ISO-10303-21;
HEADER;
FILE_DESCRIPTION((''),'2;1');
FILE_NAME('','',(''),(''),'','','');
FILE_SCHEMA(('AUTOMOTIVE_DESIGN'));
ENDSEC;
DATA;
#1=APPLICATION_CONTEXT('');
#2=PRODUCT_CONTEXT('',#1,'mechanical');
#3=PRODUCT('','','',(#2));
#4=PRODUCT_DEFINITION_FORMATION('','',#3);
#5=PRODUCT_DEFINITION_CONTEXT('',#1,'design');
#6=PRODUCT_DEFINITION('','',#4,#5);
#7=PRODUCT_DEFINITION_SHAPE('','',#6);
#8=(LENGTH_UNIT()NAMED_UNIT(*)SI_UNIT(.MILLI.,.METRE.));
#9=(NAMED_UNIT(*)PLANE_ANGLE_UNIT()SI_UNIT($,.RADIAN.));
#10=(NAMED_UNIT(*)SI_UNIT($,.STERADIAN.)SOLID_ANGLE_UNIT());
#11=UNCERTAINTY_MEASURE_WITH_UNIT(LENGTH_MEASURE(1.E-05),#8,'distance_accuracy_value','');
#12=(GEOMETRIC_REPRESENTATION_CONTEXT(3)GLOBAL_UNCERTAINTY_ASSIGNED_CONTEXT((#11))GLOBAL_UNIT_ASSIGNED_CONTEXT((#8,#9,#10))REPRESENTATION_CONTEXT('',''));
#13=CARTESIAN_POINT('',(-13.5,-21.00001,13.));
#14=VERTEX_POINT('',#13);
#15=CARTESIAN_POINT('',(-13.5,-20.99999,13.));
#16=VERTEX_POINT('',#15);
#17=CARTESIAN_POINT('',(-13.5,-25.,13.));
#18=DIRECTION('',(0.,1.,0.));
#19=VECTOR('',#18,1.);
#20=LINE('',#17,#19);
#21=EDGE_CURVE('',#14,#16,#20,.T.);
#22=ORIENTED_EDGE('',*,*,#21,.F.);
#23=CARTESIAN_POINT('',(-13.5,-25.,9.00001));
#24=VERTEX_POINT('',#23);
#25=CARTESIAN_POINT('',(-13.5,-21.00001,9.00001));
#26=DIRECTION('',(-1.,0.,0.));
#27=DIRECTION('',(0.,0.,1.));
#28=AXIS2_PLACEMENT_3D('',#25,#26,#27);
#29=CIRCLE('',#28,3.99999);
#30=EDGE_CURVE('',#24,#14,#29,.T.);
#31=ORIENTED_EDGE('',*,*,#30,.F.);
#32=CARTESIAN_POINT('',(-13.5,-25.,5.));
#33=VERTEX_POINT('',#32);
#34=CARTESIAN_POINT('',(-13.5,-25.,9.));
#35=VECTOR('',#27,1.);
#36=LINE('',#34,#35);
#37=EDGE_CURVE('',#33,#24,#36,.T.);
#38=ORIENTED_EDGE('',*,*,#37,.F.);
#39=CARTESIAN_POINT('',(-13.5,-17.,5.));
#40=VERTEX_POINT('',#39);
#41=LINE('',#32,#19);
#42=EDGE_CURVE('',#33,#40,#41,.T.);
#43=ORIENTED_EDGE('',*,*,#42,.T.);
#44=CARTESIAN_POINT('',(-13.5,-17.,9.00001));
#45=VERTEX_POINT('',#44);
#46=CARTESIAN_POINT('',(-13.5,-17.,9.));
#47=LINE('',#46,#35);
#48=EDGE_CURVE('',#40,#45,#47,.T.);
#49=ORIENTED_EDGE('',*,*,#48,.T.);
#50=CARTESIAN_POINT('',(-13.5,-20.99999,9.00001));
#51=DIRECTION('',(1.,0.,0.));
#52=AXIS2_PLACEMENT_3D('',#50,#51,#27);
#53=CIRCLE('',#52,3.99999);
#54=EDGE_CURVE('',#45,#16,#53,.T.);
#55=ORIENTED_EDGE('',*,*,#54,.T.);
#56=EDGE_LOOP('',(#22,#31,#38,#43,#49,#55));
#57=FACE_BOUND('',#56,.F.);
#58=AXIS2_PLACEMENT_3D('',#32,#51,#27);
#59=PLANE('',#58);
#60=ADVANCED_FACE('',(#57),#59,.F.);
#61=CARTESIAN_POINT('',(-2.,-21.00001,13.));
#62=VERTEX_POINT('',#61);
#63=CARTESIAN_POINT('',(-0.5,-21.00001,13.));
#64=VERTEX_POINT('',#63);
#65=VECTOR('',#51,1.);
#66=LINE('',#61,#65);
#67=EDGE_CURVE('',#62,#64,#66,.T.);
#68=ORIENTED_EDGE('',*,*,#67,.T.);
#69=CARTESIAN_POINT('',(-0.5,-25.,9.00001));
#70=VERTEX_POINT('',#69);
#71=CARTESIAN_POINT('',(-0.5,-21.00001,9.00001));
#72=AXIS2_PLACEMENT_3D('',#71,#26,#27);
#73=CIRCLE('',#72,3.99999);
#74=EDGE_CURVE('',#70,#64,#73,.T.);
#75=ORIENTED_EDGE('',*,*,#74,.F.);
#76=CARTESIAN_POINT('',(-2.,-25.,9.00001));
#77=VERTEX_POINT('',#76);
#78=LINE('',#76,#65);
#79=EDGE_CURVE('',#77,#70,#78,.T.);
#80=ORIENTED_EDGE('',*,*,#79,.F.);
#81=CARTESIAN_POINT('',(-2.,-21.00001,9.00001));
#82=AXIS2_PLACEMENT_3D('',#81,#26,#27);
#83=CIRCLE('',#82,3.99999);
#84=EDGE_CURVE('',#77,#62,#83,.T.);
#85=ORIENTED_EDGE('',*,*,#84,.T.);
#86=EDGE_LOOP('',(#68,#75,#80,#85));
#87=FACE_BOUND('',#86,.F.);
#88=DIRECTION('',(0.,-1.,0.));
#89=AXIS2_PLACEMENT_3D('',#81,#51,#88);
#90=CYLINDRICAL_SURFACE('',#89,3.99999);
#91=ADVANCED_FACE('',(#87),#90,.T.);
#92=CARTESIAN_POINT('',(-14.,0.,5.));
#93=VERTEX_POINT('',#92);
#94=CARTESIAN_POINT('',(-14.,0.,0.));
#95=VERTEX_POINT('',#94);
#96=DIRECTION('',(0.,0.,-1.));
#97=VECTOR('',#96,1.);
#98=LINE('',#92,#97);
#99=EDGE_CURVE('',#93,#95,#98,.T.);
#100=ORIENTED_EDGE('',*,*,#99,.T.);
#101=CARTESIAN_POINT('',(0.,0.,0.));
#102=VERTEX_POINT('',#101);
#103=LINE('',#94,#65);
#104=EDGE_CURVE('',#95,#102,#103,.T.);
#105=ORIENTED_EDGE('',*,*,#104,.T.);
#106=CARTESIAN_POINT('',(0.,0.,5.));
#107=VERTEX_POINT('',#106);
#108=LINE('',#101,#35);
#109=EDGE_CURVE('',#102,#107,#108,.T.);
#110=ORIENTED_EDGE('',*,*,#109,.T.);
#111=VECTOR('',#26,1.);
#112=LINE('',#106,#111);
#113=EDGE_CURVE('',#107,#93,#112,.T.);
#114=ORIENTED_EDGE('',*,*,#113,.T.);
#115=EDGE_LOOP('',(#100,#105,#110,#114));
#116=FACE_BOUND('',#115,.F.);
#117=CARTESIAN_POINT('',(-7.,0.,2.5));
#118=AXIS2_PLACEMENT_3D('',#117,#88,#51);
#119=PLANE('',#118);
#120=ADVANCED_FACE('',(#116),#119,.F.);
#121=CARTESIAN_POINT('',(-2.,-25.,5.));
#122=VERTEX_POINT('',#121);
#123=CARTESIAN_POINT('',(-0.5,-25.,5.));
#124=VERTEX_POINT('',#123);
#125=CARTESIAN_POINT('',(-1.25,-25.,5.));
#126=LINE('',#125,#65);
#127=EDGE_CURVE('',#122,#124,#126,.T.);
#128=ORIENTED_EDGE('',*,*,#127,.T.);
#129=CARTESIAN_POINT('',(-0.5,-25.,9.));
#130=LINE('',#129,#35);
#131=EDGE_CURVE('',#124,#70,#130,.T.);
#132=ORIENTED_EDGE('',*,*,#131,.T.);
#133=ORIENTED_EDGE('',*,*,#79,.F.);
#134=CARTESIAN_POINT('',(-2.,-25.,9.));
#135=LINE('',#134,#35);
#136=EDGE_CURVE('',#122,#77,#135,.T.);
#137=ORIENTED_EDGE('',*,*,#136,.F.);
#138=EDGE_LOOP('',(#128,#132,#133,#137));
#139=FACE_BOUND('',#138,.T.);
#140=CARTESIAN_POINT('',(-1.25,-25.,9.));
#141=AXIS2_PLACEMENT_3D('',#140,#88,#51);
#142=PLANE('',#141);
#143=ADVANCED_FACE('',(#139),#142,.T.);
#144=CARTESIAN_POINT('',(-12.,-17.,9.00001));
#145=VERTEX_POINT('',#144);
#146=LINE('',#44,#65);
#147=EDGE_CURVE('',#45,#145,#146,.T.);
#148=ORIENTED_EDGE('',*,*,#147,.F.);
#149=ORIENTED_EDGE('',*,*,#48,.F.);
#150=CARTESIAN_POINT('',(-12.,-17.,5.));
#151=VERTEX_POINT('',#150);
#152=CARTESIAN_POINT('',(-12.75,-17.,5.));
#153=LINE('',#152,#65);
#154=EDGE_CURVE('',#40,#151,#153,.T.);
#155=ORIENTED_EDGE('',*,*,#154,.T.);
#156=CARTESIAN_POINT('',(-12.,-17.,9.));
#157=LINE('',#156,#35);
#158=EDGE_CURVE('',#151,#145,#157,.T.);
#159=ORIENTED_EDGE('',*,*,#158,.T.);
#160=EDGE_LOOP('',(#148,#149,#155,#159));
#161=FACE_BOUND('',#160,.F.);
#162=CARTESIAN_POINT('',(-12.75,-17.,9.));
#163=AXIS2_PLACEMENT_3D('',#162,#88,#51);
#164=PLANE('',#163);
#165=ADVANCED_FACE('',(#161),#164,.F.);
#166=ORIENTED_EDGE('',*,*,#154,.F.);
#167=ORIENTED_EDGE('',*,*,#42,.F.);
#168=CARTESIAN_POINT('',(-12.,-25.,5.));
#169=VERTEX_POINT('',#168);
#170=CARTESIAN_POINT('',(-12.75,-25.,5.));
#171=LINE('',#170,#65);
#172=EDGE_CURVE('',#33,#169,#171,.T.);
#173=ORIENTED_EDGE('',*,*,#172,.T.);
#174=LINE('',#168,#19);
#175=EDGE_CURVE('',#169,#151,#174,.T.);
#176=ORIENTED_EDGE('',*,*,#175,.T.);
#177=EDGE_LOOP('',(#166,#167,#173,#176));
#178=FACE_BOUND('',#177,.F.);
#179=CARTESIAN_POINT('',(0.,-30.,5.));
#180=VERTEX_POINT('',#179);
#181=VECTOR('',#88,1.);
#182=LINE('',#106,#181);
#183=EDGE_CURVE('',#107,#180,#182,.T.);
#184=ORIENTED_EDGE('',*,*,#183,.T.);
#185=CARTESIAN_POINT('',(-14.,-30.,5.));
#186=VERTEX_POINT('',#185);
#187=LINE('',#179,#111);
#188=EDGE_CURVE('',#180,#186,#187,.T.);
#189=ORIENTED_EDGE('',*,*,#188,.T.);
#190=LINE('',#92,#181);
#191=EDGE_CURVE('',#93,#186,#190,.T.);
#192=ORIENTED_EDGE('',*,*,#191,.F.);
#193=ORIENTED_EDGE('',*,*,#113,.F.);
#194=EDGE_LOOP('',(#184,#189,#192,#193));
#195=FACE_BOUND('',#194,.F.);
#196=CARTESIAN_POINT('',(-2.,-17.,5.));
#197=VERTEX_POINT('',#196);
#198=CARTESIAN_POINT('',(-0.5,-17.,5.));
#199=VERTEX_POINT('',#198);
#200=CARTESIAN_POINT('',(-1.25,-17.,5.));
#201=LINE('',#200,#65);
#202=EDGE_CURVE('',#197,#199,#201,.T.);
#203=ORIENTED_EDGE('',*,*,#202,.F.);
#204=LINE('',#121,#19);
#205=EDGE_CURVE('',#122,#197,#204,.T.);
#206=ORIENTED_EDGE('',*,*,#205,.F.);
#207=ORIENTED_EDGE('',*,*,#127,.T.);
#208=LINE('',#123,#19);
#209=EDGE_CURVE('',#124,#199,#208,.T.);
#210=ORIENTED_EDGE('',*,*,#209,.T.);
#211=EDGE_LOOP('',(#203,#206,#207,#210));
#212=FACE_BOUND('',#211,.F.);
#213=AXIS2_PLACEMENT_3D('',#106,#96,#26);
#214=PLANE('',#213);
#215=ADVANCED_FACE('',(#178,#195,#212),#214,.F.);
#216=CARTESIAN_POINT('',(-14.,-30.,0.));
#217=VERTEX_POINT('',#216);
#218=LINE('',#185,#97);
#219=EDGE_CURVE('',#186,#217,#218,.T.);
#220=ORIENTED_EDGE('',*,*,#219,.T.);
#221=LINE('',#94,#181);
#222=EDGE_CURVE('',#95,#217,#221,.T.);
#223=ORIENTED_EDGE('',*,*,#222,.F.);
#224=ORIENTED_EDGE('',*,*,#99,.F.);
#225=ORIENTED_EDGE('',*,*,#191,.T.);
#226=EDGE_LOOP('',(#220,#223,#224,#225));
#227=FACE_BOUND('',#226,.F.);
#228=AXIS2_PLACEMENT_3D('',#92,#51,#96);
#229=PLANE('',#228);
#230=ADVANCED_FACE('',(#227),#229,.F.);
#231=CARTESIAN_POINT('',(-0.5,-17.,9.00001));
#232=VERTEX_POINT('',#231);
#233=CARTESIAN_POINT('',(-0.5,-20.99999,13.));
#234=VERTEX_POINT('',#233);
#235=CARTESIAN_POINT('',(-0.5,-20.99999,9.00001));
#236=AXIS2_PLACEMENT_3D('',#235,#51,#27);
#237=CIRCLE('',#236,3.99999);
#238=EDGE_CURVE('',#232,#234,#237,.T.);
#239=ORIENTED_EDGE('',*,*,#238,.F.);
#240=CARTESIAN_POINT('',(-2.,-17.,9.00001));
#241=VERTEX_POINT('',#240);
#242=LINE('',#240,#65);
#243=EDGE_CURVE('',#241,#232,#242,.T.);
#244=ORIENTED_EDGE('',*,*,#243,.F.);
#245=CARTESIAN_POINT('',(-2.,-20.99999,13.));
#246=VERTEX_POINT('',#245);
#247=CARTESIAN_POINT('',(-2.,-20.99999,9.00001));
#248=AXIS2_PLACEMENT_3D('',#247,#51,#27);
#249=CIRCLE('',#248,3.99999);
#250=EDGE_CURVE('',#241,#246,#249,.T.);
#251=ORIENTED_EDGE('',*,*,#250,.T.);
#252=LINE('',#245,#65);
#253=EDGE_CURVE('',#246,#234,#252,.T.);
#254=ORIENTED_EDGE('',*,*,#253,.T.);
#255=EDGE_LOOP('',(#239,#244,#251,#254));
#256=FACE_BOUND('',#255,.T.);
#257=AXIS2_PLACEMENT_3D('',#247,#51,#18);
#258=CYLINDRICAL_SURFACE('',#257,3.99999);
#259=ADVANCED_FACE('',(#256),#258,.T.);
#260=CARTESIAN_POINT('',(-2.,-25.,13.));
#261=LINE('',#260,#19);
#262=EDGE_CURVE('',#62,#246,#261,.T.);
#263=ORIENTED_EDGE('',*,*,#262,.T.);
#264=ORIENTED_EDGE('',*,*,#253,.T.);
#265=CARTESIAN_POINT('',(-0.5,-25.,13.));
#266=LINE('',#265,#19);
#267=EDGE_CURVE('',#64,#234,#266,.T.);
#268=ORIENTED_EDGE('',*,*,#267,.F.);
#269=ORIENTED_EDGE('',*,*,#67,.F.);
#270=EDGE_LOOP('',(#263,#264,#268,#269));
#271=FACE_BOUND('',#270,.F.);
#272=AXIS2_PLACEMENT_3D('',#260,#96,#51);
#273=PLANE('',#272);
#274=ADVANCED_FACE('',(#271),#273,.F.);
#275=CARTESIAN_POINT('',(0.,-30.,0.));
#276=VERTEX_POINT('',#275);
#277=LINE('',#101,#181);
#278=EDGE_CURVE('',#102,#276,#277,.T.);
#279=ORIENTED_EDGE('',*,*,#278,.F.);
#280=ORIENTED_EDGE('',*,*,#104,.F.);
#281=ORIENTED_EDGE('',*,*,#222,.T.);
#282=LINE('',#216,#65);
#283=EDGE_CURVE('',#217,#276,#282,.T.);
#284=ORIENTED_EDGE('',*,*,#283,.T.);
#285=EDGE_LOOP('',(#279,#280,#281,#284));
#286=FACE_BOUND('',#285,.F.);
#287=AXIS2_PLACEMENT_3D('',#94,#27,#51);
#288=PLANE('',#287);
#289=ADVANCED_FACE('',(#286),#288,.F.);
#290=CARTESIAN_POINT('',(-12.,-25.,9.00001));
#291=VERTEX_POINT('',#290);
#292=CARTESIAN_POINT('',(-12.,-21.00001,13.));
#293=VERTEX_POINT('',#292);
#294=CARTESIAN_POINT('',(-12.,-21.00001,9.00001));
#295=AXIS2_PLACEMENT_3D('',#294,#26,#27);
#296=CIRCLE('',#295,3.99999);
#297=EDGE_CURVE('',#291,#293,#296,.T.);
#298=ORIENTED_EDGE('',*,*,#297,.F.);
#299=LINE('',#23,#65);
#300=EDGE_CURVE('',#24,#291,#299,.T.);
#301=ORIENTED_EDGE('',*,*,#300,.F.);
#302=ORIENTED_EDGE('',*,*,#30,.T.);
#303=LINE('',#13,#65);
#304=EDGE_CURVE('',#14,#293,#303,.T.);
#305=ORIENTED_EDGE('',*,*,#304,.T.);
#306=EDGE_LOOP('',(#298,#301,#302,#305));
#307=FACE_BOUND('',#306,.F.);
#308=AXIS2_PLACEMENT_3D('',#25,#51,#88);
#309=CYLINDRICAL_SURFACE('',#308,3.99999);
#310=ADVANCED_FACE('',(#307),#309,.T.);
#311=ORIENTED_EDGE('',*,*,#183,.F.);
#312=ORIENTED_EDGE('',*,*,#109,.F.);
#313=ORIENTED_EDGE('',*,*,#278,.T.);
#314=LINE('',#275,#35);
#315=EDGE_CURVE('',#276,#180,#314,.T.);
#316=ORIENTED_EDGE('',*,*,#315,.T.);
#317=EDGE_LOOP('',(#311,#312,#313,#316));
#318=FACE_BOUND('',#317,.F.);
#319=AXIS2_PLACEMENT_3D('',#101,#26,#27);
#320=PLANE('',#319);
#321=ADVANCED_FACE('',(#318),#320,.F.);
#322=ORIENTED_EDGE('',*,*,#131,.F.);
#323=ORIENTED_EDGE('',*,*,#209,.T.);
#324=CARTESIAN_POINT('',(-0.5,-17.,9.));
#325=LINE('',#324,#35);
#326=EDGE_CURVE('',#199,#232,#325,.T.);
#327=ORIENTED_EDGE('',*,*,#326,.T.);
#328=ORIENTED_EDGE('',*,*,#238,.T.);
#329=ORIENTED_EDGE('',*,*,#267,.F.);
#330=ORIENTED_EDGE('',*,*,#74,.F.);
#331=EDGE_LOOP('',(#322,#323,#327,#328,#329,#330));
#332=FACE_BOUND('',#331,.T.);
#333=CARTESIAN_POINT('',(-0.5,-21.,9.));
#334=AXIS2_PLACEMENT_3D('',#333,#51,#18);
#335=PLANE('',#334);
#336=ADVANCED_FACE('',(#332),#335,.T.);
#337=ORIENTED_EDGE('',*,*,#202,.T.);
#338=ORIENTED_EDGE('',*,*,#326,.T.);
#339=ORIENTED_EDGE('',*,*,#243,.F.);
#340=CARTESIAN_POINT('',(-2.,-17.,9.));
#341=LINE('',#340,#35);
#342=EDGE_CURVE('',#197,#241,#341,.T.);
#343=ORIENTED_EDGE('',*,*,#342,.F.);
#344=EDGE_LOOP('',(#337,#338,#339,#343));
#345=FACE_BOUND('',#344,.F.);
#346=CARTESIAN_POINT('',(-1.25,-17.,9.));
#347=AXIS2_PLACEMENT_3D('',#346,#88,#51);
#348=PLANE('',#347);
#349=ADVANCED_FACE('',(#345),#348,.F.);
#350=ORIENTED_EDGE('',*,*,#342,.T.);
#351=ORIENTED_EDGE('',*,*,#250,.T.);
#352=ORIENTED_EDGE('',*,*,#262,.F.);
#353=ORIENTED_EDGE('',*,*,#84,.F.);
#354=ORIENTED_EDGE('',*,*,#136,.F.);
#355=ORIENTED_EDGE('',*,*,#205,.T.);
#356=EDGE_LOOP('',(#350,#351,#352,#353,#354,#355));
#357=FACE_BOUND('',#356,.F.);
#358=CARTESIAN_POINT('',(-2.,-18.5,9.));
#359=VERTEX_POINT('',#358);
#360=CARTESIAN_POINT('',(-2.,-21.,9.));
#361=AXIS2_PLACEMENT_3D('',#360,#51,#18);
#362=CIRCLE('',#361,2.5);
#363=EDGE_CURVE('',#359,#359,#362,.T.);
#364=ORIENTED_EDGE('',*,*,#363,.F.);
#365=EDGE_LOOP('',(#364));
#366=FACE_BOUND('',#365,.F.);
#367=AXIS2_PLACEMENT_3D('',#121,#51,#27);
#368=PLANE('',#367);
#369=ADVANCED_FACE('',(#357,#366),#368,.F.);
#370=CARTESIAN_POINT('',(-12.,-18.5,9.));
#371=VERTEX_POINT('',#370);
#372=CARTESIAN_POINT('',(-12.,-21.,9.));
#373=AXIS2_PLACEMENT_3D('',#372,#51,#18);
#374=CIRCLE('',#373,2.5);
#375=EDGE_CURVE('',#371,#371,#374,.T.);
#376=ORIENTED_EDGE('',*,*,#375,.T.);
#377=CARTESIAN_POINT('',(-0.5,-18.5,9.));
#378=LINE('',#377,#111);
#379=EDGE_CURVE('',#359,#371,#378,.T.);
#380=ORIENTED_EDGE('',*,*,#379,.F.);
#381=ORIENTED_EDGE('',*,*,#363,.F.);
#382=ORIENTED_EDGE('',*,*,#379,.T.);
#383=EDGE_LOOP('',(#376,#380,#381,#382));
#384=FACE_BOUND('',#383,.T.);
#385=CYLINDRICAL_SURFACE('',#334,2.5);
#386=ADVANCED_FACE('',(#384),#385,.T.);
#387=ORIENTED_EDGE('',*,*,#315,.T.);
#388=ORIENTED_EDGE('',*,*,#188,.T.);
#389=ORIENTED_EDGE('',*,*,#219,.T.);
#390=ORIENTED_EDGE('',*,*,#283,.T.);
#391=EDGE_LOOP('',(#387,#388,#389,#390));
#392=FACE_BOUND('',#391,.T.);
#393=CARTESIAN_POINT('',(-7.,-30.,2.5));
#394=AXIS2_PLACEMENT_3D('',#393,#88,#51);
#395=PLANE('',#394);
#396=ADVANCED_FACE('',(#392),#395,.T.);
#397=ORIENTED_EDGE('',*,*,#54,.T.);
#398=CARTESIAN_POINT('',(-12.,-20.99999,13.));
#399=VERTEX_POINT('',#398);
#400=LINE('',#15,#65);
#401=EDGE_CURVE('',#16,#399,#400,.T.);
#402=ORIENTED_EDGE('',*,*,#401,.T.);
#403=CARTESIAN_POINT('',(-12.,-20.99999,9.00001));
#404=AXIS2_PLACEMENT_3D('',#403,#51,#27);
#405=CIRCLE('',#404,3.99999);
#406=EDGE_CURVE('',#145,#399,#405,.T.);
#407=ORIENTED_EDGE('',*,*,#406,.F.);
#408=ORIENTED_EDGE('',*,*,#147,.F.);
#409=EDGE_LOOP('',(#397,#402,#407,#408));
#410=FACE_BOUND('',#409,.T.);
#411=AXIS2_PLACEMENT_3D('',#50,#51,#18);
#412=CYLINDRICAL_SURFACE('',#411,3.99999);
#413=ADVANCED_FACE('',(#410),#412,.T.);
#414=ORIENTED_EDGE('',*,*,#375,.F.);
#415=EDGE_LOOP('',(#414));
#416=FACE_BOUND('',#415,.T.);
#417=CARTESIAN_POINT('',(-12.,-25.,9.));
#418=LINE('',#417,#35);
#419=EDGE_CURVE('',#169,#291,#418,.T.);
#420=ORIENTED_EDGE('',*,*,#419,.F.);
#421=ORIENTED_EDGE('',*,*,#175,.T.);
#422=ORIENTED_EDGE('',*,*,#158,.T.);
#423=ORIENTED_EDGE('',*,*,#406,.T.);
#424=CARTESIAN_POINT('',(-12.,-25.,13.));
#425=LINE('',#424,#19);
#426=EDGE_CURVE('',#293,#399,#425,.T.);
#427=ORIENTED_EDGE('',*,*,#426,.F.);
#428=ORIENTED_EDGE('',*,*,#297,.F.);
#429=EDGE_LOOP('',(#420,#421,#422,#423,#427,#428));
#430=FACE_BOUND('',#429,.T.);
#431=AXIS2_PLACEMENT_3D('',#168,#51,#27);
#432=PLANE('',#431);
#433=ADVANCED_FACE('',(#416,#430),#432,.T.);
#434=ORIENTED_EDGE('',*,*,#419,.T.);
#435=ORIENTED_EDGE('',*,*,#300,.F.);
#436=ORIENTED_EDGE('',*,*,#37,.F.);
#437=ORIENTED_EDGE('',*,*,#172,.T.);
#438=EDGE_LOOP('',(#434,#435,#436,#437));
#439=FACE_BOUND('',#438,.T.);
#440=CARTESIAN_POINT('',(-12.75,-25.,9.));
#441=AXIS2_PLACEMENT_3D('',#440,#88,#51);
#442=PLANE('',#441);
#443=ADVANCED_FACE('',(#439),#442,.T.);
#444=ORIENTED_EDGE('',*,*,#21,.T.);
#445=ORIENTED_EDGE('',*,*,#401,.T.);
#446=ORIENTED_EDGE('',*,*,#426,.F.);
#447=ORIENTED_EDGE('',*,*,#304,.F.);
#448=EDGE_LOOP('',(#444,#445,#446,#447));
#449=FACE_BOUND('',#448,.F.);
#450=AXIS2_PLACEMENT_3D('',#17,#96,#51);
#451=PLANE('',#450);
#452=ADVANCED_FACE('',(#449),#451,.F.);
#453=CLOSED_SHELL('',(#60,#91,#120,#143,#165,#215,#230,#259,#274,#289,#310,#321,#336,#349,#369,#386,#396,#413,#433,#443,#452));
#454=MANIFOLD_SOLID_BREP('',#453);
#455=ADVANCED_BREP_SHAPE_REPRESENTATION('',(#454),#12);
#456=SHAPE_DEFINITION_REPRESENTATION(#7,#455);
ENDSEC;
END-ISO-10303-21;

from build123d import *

# Parameters (mm, degrees)
F1_DEPTH = 30
F3_W     = 1.5
F3_H     = 8
F4_DEPTH = 8
F5_R     = 2.5
F6_DEPTH = 13
F7_R     = 3.99999


# Not quite as in the source:
# - a fillet or chamfer is up to 0.001 mm smaller than in the source, because OpenCascade refuses the exact size


with BuildPart() as f1:
    # F0 (on Front) → F1 (new body)
    with BuildSketch(Plane.XZ):
        Polygon((-14, 0), (0, 0), (0, 5), (-0.5, 5), (-2, 5), (-12, 5), (-13.5, 5), (-14, 5), align=None)
    extrude(amount=F1_DEPTH)

    # F3 (on offset) → F4 (join)
    with BuildSketch(Plane.XZ.offset(25)):
        with Locations((-12.75, 9)):
            Rectangle(F3_W, F3_H)
        with Locations((-1.25, 9)):
            Rectangle(F3_W, F3_H)
    extrude(amount=-F4_DEPTH)

    # F5 (on face) → F6 (join, through all)
    with BuildSketch(Plane.YZ.offset(-0.5)):
        with Locations((-21, 9)):
            Circle(F5_R)
    extrude(amount=-F6_DEPTH)

    # F7 (radius 4 in the source; OpenCascade refuses exactly that, so slightly less here)
    f7_edges = [f1.edges().sort_by_distance(p)[0] for p in [
        (-1.25, -17, 13),
        (-1.25, -25, 13),
        (-12.75, -17, 13),
        (-12.75, -25, 13),
    ]]
    fillet(f7_edges, radius=F7_R)


solid = f1.part
